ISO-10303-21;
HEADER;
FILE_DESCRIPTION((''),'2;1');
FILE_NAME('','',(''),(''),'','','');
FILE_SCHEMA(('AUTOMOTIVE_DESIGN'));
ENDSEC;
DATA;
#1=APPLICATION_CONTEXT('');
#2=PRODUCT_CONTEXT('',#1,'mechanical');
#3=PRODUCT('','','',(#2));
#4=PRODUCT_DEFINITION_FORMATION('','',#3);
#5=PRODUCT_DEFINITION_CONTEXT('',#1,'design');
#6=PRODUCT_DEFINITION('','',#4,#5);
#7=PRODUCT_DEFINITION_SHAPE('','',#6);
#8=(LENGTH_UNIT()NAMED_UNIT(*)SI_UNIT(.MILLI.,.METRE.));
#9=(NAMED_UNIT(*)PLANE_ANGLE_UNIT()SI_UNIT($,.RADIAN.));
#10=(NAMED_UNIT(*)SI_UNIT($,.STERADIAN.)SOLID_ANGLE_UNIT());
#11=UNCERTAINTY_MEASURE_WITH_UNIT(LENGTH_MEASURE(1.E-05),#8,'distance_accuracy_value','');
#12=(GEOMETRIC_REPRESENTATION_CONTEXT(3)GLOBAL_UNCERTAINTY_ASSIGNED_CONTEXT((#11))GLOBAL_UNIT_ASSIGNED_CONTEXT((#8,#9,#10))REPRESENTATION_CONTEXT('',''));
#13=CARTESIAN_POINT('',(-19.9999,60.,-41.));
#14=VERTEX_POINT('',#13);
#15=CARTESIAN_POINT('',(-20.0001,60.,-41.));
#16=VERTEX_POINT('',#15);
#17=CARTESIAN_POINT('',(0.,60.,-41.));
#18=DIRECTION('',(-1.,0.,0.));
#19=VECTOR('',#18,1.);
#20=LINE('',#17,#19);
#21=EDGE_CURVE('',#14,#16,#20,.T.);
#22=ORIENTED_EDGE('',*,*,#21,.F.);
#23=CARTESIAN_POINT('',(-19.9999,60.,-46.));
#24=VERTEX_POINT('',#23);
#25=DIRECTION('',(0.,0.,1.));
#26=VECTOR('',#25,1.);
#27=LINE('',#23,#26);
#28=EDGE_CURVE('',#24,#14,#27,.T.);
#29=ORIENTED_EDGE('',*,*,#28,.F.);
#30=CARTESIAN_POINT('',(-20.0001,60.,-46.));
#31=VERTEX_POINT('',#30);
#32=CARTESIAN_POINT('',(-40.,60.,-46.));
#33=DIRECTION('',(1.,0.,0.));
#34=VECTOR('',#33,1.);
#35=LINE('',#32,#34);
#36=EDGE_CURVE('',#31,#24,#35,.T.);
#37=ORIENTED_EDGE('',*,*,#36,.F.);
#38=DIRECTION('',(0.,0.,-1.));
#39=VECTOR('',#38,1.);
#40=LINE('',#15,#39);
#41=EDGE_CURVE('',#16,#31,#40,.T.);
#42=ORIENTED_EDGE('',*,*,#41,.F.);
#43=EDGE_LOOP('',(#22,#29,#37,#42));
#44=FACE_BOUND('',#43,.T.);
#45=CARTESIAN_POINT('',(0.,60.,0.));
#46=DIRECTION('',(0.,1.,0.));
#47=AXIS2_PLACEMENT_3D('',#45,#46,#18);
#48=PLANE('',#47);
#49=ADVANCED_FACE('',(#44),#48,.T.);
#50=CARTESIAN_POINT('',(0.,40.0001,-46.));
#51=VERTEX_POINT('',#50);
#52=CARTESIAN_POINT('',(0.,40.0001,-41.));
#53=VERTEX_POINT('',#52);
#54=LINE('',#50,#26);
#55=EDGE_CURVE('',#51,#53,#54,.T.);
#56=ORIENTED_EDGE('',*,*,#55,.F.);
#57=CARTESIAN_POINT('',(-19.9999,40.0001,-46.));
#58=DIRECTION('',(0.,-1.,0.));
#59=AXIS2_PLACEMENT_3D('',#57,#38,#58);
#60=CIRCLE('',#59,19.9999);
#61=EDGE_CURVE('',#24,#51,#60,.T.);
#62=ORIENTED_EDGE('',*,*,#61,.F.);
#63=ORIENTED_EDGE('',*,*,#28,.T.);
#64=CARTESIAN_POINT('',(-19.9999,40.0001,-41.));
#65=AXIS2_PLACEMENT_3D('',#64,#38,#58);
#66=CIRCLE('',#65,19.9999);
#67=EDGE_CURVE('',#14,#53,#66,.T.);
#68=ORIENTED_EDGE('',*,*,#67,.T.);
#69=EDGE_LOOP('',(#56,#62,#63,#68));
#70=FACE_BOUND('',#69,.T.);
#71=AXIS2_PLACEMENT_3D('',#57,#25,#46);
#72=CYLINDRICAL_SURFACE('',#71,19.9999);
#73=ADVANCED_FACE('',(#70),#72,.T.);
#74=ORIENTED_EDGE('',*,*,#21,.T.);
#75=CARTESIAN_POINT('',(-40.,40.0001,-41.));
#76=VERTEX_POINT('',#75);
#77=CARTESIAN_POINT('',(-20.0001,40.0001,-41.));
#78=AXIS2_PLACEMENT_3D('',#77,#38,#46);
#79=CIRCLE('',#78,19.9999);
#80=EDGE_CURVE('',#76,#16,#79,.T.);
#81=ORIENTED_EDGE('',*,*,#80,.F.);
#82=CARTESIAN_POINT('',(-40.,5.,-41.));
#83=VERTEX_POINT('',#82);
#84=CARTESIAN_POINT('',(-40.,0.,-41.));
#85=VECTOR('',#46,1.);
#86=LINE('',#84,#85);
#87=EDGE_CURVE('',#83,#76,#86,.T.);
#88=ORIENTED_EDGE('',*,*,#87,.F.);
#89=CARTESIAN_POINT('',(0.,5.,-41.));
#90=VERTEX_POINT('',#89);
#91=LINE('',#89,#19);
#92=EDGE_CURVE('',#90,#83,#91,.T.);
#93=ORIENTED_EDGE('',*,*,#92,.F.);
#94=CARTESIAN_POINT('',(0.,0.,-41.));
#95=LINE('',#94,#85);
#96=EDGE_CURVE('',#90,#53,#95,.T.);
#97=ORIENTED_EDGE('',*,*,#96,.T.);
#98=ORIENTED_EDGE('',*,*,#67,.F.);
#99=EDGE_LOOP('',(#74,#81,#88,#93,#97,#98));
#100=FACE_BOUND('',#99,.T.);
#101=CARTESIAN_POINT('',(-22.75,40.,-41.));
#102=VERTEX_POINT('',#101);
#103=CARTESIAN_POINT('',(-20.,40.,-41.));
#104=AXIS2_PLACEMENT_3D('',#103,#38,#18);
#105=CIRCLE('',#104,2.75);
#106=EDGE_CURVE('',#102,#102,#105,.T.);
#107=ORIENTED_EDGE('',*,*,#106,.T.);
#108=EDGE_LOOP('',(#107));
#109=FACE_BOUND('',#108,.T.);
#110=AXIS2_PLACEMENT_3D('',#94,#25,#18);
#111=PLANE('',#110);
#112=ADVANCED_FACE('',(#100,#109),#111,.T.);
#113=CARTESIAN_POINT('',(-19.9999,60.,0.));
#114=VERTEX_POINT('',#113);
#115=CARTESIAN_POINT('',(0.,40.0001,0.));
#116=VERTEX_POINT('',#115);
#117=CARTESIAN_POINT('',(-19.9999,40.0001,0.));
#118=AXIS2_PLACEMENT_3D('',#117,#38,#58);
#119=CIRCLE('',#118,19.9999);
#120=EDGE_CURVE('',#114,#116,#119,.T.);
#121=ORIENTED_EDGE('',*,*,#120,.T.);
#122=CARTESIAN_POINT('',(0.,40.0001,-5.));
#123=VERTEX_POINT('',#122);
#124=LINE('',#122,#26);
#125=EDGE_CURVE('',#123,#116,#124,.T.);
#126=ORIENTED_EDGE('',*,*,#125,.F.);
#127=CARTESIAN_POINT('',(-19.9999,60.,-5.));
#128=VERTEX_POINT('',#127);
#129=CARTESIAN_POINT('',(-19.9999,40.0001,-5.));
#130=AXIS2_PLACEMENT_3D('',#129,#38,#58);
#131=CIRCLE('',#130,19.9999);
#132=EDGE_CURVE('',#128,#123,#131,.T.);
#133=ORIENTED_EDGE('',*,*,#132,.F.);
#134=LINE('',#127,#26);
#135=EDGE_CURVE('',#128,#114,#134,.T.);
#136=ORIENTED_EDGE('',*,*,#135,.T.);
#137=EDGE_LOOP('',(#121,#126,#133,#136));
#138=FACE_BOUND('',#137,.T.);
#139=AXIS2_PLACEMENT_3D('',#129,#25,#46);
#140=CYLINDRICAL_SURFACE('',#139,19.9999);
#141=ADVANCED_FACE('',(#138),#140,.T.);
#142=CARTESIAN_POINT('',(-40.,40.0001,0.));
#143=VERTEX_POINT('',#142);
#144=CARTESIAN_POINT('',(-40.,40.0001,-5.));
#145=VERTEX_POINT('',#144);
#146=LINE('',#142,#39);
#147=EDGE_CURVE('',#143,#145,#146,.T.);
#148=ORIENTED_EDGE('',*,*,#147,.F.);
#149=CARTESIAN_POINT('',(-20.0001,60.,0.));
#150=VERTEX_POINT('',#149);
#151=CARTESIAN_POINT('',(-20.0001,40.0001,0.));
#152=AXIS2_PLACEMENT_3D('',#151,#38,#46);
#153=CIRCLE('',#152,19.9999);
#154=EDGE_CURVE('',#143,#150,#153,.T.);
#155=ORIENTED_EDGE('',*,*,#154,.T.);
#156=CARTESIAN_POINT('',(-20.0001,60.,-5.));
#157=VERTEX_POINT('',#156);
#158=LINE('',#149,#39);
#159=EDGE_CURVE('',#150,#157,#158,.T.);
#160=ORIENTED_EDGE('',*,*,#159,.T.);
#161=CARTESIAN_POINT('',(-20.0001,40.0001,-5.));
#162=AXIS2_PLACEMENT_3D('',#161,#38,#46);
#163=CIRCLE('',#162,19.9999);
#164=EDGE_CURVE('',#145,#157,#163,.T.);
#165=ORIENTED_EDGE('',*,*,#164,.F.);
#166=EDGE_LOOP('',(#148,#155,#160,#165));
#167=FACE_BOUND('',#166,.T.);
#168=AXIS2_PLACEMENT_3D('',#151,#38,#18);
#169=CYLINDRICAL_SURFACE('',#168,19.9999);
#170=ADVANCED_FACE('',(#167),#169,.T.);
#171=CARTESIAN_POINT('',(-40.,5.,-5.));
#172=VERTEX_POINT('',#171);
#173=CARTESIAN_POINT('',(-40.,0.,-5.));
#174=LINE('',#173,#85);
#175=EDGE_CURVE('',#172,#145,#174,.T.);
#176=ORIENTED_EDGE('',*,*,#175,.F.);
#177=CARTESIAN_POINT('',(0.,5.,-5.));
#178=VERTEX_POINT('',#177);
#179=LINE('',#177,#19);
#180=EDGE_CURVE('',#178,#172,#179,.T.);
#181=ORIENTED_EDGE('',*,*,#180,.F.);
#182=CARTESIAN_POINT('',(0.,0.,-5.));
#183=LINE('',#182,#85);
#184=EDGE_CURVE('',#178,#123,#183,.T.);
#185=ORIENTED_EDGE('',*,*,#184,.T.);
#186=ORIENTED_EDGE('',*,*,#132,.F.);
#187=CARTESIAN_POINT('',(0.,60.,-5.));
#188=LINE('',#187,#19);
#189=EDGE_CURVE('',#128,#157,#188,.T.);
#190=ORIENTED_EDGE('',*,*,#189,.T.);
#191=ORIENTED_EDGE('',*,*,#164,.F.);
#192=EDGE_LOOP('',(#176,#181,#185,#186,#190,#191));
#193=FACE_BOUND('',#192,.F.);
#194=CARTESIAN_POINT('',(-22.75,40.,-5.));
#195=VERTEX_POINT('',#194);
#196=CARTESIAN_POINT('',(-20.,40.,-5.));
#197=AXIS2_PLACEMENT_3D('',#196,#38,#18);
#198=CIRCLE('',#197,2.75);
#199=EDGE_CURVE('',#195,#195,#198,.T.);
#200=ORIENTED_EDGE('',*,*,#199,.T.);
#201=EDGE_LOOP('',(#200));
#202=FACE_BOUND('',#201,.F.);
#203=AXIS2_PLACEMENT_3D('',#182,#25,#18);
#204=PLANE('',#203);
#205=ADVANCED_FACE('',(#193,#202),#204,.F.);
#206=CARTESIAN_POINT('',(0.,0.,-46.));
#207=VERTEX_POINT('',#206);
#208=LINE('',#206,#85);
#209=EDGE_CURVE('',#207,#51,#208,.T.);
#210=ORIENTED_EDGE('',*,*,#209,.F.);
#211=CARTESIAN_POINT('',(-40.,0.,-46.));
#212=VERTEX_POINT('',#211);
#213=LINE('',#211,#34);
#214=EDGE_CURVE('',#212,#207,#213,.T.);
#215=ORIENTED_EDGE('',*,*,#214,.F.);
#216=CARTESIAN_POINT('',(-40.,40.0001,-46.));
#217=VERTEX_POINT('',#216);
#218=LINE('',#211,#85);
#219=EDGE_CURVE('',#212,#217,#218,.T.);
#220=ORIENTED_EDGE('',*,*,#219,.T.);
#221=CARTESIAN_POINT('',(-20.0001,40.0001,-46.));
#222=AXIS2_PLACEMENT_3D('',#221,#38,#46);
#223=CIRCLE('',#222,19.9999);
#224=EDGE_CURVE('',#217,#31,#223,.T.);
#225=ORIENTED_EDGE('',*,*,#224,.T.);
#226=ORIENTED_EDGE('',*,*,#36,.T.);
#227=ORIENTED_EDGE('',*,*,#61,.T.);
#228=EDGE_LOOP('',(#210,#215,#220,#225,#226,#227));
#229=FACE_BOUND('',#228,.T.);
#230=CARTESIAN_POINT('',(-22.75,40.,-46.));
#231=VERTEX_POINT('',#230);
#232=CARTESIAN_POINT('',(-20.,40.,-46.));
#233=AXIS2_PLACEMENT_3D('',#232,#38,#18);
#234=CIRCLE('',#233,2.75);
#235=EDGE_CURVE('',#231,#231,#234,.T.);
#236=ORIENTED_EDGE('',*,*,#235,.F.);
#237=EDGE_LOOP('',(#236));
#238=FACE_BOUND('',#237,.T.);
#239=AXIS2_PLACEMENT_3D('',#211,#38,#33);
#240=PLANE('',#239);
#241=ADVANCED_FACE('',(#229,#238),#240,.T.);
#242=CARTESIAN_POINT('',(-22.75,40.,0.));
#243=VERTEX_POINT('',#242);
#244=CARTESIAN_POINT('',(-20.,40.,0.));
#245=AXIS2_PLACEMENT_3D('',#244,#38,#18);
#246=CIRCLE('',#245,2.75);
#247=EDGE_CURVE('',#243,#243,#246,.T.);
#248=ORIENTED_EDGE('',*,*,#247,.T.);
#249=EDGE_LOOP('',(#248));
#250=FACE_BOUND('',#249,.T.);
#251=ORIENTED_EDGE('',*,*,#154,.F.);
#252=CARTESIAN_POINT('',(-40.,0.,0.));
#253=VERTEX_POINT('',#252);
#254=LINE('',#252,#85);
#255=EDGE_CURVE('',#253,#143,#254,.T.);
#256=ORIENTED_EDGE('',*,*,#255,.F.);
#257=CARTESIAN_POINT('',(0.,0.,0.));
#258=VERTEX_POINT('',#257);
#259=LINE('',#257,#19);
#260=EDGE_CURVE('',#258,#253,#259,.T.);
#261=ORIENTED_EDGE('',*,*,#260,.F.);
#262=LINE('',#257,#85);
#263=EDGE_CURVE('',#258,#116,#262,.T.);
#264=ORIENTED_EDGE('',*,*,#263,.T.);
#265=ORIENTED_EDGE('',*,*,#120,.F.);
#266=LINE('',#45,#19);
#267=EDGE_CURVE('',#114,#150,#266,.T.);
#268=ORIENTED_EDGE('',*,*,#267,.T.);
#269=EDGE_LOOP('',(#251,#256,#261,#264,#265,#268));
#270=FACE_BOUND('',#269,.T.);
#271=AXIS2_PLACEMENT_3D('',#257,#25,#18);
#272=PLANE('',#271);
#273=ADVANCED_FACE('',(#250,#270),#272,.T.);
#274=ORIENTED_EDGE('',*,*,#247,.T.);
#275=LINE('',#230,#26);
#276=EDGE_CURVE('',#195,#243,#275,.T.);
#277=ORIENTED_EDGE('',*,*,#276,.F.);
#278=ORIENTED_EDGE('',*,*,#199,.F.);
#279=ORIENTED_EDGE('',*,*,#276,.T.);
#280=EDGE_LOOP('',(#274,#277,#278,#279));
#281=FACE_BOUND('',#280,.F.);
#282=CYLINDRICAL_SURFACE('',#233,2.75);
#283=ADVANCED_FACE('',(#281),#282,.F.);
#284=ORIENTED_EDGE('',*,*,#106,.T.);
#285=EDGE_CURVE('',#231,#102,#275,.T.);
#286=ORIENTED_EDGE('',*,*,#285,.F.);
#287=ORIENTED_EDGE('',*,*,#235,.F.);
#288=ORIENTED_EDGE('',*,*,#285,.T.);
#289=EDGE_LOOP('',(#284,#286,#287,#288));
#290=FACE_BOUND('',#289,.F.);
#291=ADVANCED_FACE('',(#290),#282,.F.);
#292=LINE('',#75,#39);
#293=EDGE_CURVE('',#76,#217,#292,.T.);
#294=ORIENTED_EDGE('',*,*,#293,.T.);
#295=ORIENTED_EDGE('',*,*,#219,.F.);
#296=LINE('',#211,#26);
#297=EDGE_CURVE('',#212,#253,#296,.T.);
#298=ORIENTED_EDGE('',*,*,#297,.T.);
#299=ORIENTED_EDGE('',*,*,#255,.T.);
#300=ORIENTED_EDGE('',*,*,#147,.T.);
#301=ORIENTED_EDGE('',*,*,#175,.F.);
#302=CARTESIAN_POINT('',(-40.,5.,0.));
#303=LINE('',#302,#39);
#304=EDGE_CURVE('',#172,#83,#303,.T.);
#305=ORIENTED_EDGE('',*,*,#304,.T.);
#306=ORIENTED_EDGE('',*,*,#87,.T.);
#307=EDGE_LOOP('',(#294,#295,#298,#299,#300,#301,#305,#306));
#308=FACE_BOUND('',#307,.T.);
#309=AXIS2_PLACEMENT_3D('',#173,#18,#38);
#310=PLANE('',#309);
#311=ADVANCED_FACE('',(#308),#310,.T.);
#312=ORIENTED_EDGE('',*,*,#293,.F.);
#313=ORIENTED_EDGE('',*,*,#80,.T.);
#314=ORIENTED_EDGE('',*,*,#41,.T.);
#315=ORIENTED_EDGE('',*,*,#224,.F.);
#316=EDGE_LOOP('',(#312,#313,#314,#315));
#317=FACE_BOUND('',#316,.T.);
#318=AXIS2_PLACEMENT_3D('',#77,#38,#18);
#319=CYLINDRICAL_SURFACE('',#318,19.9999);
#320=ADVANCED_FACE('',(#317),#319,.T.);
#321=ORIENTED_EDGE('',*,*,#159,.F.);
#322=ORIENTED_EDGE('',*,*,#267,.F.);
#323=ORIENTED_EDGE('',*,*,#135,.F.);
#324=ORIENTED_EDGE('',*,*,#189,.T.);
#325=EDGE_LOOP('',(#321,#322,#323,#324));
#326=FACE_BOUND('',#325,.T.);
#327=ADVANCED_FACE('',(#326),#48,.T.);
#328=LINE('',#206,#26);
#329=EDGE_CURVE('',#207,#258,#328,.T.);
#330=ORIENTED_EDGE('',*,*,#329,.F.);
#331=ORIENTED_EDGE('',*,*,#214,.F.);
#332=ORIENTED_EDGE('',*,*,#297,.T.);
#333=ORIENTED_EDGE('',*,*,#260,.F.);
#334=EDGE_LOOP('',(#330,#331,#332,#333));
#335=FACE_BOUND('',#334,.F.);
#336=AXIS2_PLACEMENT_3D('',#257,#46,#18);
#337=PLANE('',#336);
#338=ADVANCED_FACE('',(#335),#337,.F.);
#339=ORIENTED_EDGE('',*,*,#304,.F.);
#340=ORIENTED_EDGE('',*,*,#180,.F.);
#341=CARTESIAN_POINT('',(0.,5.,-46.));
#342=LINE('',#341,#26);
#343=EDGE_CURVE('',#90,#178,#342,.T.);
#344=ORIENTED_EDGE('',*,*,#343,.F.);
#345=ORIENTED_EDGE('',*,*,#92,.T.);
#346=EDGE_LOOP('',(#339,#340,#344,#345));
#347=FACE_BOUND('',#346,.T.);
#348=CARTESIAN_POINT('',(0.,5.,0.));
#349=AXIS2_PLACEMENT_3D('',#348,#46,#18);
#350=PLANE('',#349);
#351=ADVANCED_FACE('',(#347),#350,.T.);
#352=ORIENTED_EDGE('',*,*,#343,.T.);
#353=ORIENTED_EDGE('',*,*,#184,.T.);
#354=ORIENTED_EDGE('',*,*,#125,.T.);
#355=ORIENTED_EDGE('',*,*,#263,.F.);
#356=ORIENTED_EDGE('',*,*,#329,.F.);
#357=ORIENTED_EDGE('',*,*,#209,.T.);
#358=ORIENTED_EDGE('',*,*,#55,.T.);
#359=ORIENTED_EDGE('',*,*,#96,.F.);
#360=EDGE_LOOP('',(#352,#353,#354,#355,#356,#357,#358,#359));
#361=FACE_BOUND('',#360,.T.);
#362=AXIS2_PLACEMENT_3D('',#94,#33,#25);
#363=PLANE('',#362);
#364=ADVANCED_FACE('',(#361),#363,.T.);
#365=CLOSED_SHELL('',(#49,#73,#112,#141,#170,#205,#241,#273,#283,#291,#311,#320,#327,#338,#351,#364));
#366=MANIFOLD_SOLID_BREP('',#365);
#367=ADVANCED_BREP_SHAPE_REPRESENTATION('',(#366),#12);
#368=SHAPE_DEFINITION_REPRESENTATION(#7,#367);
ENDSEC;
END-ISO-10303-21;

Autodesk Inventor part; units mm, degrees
ref_plane "YZ Plane" through (0, 0, 0) normal (1, 0, 0) x (0, 1, 0)
ref_plane "XZ Plane" through (0, 0, 0) normal (0, 1, 0) x (-1, 0, 0)
ref_plane "XY Plane" through (0, 0, 0) normal (0, 0, 1) x (1, 0, 0)
sketch "Sketch1" plane through (0, 0, 0) normal (0, 1, 0) x (-1, 0, 0)
  line L0 (0, 0) -> (40, 0)
  line L1 (40, 0) -> (40, -46)
  line L2 (40, -46) -> (0, -46)
  line L3 (0, -46) -> (0, 0)
  line L4 (40, 0) -> (0, 0)
  line L5 (0, 0) -> (0, -5)
  line L6 (0, -5) -> (40, -5)
  line L7 (40, -5) -> (40, 0)
  line L8 (40, -46) -> (0, -46)
  line L9 (0, -46) -> (0, -41)
  line L10 (0, -41) -> (40, -41)
  line L11 (40, -41) -> (40, -46)
  point P0 (40, -5)
  dimension "d1" = 40
  dimension "d2" = 46
  dimension "d3" = 5
  dimension "d4" = 5
extrude "Extrusion1" add sketch "Sketch1" along normal blind 5 contours L6 L1 L10 L3
extrude "Extrusion2" add sketch "Sketch1" along normal blind 60 contours L0 L1 L6 L3 | L10 L1 L2 L3
fillet "Fillet1" radius 20 4 edges at (-40, 60, -43.5) (0, 60, -43.5) (0, 60, -2.5) (-40, 60, -2.5)
sketch "Sketch2" plane through (0, 0, -46) normal (0, 0, -1) x (-1, 0, 0)
  arc A0 (40, 40) -> (0, 40) centre (20, 40) ccw projected
  line L0 (0, 0) -> (0, 40) projected
  line L1 (0, 0) -> (40, 0) projected
  line L2 (40, 0) -> (40, 40) projected
  circle A1 centre (20, 40) radius 2.75
  point P0 (0, 0)
  dimension "d10" = 5.5
extrude "Extrusion3" cut sketch "Sketch2" against normal blind 600 contours A1
properties part number "Apoio_Fixo_3DPrint"
